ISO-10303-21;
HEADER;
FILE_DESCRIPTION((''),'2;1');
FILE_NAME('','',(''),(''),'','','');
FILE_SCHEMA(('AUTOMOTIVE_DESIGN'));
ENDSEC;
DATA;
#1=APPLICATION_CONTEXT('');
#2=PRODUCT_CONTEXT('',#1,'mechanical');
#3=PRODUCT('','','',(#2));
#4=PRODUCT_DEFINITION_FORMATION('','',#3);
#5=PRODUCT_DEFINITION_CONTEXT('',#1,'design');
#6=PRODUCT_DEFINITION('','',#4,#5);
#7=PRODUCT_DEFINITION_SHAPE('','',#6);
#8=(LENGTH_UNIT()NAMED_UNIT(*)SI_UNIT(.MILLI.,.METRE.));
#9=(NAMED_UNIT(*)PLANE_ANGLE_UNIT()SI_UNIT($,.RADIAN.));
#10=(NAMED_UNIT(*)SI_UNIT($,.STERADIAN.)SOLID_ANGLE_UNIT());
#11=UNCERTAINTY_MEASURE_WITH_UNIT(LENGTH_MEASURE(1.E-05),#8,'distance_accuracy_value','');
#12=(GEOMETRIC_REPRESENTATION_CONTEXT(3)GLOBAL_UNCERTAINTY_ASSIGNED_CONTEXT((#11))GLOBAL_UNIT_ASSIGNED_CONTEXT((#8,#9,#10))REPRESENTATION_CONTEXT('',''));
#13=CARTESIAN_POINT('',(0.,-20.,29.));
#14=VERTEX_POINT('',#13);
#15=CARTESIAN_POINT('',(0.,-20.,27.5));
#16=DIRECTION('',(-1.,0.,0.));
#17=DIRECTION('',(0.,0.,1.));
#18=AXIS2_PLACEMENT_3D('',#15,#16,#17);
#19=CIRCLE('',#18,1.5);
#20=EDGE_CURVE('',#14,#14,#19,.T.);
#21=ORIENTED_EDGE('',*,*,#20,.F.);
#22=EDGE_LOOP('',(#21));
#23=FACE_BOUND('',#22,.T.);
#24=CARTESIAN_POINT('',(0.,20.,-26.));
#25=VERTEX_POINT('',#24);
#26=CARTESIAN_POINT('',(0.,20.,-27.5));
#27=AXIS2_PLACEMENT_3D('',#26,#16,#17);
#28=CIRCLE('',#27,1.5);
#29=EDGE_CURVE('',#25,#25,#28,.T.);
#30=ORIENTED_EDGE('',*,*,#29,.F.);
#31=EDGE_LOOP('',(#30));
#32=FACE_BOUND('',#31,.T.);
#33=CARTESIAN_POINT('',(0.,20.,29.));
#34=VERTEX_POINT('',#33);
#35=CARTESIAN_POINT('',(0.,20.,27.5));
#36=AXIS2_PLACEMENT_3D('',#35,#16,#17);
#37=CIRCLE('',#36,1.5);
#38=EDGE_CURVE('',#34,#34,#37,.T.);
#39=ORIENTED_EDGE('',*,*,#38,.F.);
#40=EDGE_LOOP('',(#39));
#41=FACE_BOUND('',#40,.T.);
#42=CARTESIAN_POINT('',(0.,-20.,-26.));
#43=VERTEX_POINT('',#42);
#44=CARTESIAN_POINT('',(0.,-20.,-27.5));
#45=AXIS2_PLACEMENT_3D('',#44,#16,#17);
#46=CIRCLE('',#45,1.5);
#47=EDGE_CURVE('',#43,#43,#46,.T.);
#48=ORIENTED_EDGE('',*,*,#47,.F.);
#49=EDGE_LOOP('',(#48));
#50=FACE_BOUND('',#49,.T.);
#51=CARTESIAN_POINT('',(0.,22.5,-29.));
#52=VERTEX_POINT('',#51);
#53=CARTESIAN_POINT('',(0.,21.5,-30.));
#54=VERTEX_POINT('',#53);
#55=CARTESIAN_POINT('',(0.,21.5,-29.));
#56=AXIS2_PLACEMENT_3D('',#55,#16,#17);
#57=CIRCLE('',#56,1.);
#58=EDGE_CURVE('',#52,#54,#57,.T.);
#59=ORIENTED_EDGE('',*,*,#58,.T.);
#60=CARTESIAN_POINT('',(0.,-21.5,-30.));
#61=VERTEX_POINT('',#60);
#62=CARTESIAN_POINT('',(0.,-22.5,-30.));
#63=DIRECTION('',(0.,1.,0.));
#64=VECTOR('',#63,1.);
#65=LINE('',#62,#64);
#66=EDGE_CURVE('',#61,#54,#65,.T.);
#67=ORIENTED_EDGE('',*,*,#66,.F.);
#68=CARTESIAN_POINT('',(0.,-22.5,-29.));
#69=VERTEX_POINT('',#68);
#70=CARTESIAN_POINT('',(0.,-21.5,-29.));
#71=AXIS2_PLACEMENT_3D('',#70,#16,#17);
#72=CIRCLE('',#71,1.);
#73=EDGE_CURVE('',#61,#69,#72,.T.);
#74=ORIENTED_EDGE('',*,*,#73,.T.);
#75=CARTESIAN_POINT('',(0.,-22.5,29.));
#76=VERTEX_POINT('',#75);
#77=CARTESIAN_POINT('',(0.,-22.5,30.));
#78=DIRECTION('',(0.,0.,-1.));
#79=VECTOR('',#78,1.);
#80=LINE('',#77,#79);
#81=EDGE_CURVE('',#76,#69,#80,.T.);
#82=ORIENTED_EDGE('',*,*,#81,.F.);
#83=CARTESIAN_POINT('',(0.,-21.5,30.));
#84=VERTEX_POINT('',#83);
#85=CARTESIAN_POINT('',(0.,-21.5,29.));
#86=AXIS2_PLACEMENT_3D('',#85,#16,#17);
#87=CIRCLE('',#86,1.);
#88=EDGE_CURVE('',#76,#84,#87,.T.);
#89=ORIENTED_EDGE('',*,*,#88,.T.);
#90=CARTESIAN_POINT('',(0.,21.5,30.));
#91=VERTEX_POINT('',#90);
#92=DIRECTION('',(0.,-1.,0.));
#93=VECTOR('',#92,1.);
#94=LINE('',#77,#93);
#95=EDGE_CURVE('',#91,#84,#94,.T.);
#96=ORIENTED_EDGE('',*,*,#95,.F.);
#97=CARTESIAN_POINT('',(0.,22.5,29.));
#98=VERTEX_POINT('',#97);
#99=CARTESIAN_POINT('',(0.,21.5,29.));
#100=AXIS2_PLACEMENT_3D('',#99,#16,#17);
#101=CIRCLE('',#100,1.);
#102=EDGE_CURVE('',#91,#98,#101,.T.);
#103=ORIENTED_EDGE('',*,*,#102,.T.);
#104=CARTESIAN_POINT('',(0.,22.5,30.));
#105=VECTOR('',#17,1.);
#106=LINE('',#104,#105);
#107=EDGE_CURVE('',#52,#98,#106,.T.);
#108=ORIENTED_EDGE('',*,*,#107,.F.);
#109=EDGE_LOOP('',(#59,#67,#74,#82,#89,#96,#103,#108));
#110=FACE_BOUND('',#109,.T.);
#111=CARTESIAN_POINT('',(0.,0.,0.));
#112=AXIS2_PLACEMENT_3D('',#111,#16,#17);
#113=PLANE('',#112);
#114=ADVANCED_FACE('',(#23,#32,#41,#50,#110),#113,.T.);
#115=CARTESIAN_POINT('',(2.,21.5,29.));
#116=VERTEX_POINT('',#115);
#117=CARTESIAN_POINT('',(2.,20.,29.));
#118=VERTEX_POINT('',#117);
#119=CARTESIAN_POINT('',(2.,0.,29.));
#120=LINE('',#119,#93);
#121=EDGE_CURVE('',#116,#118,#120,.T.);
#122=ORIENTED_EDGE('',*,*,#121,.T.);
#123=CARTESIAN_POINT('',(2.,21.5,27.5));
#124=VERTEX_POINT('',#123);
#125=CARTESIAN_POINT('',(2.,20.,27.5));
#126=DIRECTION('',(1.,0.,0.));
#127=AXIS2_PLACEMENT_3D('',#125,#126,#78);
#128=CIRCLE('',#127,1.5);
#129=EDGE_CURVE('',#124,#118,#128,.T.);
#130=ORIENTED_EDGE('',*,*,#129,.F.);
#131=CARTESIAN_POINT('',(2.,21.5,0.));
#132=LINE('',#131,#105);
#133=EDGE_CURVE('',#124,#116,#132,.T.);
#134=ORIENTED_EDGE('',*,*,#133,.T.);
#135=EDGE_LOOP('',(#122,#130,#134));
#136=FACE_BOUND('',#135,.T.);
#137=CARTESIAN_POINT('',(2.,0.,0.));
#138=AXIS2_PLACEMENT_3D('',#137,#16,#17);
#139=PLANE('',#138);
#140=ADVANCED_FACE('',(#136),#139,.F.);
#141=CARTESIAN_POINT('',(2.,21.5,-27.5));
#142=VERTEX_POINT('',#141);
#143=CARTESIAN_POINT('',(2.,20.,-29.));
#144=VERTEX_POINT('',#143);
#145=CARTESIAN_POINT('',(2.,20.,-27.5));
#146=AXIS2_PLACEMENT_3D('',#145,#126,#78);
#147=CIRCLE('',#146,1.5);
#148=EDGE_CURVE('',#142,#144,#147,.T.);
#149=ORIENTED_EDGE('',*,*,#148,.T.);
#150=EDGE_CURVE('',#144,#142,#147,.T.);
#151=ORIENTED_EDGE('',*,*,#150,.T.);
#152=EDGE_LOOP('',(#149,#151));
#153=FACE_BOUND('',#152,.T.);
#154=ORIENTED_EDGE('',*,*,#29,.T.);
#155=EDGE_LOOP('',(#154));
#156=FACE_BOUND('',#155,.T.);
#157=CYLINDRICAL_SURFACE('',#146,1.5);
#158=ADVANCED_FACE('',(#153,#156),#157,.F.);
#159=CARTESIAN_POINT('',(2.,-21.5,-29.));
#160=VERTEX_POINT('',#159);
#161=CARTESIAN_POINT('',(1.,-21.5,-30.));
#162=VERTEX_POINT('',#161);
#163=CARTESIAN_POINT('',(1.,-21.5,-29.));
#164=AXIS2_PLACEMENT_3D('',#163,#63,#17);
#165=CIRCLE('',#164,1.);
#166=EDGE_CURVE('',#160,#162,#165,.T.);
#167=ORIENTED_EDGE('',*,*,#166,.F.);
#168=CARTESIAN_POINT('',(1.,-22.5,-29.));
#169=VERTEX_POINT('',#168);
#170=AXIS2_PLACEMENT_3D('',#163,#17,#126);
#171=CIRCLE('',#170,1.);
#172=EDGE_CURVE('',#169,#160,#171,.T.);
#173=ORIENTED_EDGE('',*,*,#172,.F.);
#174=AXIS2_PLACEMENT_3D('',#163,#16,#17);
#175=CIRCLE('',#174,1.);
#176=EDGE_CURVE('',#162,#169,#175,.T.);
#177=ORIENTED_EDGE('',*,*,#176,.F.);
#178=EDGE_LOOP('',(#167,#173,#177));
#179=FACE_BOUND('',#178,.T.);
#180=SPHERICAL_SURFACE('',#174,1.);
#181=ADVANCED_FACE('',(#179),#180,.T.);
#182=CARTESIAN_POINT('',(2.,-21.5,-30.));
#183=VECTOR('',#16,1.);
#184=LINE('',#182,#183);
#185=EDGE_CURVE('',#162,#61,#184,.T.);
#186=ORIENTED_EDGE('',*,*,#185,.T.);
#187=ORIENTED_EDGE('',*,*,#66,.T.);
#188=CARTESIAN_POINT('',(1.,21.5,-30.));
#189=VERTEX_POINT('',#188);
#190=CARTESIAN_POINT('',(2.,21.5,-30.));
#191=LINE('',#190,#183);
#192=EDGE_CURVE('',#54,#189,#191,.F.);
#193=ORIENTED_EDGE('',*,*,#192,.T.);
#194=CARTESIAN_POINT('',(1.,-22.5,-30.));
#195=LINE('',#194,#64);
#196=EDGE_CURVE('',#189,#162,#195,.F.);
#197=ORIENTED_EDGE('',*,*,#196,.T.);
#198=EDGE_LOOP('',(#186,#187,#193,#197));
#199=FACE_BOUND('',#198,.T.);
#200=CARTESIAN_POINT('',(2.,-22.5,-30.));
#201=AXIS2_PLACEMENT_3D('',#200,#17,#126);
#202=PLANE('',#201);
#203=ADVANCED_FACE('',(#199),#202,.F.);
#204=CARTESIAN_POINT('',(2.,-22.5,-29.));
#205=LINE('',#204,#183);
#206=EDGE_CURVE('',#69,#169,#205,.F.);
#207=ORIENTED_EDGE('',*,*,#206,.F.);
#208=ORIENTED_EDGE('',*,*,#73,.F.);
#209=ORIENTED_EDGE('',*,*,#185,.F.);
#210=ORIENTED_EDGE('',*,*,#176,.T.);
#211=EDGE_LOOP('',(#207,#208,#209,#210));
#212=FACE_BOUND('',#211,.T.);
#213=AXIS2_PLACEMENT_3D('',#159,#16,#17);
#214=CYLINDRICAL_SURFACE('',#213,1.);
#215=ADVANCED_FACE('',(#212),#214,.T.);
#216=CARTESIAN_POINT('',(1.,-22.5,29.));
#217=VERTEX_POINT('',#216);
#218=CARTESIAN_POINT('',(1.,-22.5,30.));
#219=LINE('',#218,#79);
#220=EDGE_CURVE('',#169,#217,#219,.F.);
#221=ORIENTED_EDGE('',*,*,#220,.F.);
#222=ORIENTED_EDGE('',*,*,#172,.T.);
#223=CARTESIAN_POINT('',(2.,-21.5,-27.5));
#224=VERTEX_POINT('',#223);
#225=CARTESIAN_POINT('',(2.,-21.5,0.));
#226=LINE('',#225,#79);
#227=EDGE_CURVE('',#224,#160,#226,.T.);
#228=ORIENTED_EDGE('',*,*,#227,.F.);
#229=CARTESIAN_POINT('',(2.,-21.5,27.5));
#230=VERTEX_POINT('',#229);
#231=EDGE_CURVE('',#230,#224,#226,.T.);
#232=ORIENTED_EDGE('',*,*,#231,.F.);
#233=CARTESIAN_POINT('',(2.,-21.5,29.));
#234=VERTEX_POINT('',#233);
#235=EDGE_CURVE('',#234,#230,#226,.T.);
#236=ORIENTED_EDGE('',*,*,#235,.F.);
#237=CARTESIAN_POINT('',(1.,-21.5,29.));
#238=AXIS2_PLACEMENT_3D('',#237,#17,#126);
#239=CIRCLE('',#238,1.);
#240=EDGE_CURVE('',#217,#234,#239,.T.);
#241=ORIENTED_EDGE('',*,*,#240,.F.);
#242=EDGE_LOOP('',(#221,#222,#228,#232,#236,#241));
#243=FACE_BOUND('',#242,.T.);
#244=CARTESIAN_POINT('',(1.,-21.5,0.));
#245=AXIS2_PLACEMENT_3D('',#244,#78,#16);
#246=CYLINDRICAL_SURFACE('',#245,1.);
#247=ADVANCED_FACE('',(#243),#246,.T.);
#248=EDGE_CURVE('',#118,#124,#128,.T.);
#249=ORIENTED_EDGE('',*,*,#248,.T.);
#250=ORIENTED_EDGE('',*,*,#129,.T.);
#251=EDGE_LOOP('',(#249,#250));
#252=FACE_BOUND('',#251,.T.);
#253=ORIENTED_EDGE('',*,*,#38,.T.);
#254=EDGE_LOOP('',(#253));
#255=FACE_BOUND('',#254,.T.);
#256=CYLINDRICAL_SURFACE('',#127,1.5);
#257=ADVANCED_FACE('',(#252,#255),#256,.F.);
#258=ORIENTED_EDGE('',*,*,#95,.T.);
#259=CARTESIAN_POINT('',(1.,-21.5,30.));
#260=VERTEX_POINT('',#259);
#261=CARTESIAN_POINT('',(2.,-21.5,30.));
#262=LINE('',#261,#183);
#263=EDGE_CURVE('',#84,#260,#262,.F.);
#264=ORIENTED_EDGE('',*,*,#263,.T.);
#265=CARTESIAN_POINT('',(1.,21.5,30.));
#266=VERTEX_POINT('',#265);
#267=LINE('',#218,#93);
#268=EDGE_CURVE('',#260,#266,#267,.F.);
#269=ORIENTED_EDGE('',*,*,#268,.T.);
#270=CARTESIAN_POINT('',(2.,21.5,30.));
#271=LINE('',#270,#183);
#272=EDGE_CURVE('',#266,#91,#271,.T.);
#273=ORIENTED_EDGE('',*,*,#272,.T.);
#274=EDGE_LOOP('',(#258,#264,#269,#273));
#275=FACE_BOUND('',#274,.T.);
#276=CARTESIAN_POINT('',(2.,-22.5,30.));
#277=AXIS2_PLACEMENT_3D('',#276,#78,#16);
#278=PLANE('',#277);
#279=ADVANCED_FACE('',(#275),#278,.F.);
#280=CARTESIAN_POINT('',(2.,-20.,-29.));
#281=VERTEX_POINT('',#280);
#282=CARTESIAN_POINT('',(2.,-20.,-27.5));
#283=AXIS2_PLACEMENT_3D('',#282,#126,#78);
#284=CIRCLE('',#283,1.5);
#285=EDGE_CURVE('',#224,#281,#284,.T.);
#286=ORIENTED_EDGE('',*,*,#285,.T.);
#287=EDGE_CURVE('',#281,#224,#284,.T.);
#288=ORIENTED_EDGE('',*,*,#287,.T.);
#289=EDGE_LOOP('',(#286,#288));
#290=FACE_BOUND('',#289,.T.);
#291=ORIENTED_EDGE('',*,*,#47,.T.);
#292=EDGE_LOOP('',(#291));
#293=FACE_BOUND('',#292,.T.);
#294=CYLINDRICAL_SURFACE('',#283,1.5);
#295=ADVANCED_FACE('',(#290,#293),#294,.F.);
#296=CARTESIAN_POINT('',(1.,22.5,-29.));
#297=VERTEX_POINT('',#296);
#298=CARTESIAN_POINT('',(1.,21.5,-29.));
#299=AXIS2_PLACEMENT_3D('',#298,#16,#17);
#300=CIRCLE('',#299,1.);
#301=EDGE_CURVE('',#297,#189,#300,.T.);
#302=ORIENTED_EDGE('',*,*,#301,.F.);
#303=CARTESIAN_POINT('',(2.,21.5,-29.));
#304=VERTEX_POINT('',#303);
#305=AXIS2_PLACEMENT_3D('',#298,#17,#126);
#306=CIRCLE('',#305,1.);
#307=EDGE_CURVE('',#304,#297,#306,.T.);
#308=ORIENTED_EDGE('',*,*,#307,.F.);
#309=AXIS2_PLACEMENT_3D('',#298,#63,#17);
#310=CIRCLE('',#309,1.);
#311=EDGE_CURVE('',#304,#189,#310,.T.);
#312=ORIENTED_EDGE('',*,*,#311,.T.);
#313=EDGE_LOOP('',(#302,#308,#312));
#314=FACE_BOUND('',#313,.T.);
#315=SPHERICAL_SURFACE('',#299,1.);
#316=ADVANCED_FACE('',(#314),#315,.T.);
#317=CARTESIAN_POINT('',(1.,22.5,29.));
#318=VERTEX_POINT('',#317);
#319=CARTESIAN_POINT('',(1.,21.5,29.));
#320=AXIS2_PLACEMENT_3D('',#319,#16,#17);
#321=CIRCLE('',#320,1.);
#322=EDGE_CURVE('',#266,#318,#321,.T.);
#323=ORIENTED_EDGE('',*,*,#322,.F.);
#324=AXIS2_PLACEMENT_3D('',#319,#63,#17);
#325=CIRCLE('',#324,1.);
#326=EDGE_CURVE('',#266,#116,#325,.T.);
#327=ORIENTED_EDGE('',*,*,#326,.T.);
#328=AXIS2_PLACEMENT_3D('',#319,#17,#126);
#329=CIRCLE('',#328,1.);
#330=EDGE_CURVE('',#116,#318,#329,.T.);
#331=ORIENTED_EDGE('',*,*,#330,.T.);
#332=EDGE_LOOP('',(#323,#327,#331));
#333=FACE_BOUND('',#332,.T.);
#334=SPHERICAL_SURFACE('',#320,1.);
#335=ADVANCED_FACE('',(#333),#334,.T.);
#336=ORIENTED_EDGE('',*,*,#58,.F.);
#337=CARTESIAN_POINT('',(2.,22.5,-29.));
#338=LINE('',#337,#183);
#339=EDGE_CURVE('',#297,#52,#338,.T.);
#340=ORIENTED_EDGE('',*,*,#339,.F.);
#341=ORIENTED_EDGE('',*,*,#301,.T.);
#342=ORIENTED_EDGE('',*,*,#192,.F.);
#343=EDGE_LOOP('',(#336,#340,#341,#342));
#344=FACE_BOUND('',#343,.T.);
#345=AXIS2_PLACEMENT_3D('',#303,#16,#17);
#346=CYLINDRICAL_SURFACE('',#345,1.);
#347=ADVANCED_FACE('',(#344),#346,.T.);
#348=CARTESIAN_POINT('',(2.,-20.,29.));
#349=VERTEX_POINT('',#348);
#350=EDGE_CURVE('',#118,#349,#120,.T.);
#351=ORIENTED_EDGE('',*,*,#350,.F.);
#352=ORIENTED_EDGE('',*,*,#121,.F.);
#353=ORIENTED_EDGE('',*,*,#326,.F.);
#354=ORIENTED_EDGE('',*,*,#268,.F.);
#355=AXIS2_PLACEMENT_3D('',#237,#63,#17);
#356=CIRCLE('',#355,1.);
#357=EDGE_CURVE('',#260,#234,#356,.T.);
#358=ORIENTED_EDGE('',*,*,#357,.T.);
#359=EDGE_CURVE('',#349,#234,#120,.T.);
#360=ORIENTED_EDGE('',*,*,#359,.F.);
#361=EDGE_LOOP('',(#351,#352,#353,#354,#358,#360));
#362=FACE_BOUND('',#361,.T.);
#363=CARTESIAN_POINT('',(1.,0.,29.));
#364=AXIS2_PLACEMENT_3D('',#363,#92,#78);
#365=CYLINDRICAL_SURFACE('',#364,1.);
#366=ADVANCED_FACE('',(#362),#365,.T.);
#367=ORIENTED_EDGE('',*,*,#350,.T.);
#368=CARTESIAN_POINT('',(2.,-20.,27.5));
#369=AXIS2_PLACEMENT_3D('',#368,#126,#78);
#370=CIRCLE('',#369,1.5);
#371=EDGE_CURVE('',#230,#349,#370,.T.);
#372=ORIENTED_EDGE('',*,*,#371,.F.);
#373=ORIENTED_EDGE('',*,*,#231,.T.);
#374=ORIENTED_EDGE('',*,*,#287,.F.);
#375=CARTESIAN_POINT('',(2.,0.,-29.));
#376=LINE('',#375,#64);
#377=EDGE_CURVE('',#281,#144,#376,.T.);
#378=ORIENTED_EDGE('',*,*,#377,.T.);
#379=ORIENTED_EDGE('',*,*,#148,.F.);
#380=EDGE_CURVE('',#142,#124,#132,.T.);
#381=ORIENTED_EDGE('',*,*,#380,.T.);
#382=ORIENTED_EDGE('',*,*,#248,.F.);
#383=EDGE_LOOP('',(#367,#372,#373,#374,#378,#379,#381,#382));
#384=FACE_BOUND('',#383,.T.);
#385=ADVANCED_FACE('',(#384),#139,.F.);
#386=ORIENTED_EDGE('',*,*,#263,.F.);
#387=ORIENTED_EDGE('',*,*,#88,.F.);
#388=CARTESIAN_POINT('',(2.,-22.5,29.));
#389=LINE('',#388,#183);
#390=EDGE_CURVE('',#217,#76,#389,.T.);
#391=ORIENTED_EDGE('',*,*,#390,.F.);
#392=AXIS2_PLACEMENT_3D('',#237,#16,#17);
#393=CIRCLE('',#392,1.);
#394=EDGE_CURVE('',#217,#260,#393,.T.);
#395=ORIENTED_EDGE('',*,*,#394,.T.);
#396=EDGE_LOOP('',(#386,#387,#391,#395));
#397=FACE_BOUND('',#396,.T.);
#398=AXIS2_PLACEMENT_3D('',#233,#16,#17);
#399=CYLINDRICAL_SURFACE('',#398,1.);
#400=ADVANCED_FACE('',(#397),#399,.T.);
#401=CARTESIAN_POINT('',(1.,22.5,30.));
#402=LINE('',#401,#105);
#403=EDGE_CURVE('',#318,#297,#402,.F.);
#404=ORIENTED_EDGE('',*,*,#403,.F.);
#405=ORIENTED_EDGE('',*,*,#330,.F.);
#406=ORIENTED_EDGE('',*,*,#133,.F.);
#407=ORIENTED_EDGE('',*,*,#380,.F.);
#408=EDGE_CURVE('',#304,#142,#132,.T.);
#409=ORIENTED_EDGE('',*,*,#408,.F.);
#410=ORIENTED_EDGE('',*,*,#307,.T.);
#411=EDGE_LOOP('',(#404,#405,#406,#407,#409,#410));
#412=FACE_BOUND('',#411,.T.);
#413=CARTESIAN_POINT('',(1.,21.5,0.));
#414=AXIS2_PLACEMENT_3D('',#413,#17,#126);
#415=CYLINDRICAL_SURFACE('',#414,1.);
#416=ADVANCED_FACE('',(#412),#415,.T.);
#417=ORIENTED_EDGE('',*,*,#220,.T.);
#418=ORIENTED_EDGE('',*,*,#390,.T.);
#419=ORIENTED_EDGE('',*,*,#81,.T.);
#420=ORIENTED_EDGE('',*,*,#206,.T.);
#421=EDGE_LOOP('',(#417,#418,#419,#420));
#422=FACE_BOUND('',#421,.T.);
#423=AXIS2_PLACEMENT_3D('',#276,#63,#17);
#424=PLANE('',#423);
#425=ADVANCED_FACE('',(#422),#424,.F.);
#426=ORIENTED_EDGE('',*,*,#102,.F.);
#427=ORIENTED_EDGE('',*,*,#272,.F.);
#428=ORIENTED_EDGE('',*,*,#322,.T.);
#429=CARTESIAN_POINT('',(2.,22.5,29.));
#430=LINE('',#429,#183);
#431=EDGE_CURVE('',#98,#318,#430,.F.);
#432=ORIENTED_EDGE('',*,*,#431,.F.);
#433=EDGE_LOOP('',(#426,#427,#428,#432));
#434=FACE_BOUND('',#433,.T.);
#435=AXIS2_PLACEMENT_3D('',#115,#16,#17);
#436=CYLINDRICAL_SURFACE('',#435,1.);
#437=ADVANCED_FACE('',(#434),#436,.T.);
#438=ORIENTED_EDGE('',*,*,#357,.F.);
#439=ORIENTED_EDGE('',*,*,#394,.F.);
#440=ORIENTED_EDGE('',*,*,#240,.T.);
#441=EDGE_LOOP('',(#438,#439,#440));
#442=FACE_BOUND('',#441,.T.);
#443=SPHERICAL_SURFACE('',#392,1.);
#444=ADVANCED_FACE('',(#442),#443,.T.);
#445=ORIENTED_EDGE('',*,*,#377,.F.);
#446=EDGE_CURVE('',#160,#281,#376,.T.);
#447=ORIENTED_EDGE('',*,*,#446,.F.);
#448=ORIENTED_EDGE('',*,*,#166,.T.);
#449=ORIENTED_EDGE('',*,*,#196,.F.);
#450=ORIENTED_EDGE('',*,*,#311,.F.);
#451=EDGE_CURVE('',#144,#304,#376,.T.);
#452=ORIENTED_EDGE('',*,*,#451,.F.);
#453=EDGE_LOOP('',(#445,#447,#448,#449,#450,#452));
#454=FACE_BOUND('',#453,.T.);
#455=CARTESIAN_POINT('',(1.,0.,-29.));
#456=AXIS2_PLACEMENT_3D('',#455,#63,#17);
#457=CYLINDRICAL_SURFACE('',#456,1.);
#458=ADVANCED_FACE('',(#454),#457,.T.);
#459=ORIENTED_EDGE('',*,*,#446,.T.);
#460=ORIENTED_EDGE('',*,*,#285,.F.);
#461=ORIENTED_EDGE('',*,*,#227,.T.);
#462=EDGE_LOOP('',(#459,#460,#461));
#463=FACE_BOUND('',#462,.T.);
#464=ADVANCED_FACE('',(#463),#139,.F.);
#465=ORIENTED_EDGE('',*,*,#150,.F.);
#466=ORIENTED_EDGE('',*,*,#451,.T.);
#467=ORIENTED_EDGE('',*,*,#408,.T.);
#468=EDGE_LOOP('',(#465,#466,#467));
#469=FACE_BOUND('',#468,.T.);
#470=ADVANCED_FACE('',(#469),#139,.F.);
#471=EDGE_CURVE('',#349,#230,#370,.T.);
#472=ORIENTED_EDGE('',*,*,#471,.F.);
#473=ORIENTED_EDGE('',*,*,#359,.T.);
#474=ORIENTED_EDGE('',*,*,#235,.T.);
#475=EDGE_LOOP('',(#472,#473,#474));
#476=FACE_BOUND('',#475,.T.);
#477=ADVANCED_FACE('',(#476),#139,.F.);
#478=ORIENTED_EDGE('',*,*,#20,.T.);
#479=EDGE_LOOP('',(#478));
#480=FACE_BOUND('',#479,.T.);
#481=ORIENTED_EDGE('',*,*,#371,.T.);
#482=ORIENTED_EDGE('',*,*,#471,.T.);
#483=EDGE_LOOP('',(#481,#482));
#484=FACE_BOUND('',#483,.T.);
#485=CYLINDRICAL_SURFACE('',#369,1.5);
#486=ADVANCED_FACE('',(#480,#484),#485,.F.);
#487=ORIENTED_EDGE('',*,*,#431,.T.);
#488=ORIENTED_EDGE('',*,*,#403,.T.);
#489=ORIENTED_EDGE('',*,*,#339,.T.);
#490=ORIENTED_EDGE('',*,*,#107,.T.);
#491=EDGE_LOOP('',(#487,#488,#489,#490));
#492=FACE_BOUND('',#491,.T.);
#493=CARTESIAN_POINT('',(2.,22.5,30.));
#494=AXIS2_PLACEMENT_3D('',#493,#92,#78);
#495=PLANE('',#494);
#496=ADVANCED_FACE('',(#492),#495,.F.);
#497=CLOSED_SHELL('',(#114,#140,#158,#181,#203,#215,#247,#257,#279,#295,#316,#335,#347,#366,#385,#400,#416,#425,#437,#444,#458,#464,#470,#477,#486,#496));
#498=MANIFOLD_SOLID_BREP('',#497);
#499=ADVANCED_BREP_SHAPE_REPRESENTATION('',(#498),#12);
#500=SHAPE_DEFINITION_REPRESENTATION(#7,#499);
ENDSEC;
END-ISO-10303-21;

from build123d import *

# Parameters (mm, degrees)
SKETCH1_W                 = 60
SKETCH1_H                 = 45
BOSS_EXTRUDE1_DEPTH       = 2
F_3_0MM_DOWEL_HOLE1_D     = 3
F_3_0MM_DOWEL_HOLE1_DEPTH = 20
F_3_0MM_DOWEL_HOLE1_TIP   = 0.901290929
FILLET2_R                 = 1
FILLET1_R                 = 1


with BuildPart() as part:
    # Sketch1 → Boss-Extrude1 (new body)
    with BuildSketch(Plane(origin=(0, 0, 0), x_dir=(0, 0, -1), z_dir=(1, 0, 0))):
        Rectangle(SKETCH1_W, SKETCH1_H)
    extrude(amount=BOSS_EXTRUDE1_DEPTH)

    # Ø3.0mm Dowel Hole1
    with Locations(Plane(origin=(2, 0, 0), x_dir=(0, 0, -1), z_dir=(1, 0, 0))):
        with Locations((-27.5, 20), (27.5, 20), (27.5, -20), (-27.5, -20)):
            Hole(F_3_0MM_DOWEL_HOLE1_D / 2, depth=F_3_0MM_DOWEL_HOLE1_DEPTH)
            with Locations((0, 0, -(F_3_0MM_DOWEL_HOLE1_DEPTH + F_3_0MM_DOWEL_HOLE1_TIP / 2))):  # 118° drill point
                Cone(0, F_3_0MM_DOWEL_HOLE1_D / 2, F_3_0MM_DOWEL_HOLE1_TIP, mode=Mode.SUBTRACT)

    # Fillet2
    fillet2_edges = [part.edges().sort_by_distance(p)[0] for p in [
        (1, -22.5, -30),
        (1, -22.5, 30),
        (1, 22.5, 30),
        (1, 22.5, -30),
    ]]
    fillet(fillet2_edges, radius=FILLET2_R)

    # Fillet1
    fillet1_edges = [part.edges().sort_by_distance(p)[0] for p in [
        (2, 0, -30),
        (2, -22.5, 0),
        (2, 22.5, 0),
        (2, 0, 30),
        (2, 22.207106781, 29.707106781),
        (2, 22.207106781, -29.707106781),
        (2, -22.207106781, 29.707106781),
        (2, -22.207106781, -29.707106781),
    ]]
    fillet(fillet1_edges, radius=FILLET1_R - 0.0001)  # a hair under: the kernel refuses the full size


solid = part.part
